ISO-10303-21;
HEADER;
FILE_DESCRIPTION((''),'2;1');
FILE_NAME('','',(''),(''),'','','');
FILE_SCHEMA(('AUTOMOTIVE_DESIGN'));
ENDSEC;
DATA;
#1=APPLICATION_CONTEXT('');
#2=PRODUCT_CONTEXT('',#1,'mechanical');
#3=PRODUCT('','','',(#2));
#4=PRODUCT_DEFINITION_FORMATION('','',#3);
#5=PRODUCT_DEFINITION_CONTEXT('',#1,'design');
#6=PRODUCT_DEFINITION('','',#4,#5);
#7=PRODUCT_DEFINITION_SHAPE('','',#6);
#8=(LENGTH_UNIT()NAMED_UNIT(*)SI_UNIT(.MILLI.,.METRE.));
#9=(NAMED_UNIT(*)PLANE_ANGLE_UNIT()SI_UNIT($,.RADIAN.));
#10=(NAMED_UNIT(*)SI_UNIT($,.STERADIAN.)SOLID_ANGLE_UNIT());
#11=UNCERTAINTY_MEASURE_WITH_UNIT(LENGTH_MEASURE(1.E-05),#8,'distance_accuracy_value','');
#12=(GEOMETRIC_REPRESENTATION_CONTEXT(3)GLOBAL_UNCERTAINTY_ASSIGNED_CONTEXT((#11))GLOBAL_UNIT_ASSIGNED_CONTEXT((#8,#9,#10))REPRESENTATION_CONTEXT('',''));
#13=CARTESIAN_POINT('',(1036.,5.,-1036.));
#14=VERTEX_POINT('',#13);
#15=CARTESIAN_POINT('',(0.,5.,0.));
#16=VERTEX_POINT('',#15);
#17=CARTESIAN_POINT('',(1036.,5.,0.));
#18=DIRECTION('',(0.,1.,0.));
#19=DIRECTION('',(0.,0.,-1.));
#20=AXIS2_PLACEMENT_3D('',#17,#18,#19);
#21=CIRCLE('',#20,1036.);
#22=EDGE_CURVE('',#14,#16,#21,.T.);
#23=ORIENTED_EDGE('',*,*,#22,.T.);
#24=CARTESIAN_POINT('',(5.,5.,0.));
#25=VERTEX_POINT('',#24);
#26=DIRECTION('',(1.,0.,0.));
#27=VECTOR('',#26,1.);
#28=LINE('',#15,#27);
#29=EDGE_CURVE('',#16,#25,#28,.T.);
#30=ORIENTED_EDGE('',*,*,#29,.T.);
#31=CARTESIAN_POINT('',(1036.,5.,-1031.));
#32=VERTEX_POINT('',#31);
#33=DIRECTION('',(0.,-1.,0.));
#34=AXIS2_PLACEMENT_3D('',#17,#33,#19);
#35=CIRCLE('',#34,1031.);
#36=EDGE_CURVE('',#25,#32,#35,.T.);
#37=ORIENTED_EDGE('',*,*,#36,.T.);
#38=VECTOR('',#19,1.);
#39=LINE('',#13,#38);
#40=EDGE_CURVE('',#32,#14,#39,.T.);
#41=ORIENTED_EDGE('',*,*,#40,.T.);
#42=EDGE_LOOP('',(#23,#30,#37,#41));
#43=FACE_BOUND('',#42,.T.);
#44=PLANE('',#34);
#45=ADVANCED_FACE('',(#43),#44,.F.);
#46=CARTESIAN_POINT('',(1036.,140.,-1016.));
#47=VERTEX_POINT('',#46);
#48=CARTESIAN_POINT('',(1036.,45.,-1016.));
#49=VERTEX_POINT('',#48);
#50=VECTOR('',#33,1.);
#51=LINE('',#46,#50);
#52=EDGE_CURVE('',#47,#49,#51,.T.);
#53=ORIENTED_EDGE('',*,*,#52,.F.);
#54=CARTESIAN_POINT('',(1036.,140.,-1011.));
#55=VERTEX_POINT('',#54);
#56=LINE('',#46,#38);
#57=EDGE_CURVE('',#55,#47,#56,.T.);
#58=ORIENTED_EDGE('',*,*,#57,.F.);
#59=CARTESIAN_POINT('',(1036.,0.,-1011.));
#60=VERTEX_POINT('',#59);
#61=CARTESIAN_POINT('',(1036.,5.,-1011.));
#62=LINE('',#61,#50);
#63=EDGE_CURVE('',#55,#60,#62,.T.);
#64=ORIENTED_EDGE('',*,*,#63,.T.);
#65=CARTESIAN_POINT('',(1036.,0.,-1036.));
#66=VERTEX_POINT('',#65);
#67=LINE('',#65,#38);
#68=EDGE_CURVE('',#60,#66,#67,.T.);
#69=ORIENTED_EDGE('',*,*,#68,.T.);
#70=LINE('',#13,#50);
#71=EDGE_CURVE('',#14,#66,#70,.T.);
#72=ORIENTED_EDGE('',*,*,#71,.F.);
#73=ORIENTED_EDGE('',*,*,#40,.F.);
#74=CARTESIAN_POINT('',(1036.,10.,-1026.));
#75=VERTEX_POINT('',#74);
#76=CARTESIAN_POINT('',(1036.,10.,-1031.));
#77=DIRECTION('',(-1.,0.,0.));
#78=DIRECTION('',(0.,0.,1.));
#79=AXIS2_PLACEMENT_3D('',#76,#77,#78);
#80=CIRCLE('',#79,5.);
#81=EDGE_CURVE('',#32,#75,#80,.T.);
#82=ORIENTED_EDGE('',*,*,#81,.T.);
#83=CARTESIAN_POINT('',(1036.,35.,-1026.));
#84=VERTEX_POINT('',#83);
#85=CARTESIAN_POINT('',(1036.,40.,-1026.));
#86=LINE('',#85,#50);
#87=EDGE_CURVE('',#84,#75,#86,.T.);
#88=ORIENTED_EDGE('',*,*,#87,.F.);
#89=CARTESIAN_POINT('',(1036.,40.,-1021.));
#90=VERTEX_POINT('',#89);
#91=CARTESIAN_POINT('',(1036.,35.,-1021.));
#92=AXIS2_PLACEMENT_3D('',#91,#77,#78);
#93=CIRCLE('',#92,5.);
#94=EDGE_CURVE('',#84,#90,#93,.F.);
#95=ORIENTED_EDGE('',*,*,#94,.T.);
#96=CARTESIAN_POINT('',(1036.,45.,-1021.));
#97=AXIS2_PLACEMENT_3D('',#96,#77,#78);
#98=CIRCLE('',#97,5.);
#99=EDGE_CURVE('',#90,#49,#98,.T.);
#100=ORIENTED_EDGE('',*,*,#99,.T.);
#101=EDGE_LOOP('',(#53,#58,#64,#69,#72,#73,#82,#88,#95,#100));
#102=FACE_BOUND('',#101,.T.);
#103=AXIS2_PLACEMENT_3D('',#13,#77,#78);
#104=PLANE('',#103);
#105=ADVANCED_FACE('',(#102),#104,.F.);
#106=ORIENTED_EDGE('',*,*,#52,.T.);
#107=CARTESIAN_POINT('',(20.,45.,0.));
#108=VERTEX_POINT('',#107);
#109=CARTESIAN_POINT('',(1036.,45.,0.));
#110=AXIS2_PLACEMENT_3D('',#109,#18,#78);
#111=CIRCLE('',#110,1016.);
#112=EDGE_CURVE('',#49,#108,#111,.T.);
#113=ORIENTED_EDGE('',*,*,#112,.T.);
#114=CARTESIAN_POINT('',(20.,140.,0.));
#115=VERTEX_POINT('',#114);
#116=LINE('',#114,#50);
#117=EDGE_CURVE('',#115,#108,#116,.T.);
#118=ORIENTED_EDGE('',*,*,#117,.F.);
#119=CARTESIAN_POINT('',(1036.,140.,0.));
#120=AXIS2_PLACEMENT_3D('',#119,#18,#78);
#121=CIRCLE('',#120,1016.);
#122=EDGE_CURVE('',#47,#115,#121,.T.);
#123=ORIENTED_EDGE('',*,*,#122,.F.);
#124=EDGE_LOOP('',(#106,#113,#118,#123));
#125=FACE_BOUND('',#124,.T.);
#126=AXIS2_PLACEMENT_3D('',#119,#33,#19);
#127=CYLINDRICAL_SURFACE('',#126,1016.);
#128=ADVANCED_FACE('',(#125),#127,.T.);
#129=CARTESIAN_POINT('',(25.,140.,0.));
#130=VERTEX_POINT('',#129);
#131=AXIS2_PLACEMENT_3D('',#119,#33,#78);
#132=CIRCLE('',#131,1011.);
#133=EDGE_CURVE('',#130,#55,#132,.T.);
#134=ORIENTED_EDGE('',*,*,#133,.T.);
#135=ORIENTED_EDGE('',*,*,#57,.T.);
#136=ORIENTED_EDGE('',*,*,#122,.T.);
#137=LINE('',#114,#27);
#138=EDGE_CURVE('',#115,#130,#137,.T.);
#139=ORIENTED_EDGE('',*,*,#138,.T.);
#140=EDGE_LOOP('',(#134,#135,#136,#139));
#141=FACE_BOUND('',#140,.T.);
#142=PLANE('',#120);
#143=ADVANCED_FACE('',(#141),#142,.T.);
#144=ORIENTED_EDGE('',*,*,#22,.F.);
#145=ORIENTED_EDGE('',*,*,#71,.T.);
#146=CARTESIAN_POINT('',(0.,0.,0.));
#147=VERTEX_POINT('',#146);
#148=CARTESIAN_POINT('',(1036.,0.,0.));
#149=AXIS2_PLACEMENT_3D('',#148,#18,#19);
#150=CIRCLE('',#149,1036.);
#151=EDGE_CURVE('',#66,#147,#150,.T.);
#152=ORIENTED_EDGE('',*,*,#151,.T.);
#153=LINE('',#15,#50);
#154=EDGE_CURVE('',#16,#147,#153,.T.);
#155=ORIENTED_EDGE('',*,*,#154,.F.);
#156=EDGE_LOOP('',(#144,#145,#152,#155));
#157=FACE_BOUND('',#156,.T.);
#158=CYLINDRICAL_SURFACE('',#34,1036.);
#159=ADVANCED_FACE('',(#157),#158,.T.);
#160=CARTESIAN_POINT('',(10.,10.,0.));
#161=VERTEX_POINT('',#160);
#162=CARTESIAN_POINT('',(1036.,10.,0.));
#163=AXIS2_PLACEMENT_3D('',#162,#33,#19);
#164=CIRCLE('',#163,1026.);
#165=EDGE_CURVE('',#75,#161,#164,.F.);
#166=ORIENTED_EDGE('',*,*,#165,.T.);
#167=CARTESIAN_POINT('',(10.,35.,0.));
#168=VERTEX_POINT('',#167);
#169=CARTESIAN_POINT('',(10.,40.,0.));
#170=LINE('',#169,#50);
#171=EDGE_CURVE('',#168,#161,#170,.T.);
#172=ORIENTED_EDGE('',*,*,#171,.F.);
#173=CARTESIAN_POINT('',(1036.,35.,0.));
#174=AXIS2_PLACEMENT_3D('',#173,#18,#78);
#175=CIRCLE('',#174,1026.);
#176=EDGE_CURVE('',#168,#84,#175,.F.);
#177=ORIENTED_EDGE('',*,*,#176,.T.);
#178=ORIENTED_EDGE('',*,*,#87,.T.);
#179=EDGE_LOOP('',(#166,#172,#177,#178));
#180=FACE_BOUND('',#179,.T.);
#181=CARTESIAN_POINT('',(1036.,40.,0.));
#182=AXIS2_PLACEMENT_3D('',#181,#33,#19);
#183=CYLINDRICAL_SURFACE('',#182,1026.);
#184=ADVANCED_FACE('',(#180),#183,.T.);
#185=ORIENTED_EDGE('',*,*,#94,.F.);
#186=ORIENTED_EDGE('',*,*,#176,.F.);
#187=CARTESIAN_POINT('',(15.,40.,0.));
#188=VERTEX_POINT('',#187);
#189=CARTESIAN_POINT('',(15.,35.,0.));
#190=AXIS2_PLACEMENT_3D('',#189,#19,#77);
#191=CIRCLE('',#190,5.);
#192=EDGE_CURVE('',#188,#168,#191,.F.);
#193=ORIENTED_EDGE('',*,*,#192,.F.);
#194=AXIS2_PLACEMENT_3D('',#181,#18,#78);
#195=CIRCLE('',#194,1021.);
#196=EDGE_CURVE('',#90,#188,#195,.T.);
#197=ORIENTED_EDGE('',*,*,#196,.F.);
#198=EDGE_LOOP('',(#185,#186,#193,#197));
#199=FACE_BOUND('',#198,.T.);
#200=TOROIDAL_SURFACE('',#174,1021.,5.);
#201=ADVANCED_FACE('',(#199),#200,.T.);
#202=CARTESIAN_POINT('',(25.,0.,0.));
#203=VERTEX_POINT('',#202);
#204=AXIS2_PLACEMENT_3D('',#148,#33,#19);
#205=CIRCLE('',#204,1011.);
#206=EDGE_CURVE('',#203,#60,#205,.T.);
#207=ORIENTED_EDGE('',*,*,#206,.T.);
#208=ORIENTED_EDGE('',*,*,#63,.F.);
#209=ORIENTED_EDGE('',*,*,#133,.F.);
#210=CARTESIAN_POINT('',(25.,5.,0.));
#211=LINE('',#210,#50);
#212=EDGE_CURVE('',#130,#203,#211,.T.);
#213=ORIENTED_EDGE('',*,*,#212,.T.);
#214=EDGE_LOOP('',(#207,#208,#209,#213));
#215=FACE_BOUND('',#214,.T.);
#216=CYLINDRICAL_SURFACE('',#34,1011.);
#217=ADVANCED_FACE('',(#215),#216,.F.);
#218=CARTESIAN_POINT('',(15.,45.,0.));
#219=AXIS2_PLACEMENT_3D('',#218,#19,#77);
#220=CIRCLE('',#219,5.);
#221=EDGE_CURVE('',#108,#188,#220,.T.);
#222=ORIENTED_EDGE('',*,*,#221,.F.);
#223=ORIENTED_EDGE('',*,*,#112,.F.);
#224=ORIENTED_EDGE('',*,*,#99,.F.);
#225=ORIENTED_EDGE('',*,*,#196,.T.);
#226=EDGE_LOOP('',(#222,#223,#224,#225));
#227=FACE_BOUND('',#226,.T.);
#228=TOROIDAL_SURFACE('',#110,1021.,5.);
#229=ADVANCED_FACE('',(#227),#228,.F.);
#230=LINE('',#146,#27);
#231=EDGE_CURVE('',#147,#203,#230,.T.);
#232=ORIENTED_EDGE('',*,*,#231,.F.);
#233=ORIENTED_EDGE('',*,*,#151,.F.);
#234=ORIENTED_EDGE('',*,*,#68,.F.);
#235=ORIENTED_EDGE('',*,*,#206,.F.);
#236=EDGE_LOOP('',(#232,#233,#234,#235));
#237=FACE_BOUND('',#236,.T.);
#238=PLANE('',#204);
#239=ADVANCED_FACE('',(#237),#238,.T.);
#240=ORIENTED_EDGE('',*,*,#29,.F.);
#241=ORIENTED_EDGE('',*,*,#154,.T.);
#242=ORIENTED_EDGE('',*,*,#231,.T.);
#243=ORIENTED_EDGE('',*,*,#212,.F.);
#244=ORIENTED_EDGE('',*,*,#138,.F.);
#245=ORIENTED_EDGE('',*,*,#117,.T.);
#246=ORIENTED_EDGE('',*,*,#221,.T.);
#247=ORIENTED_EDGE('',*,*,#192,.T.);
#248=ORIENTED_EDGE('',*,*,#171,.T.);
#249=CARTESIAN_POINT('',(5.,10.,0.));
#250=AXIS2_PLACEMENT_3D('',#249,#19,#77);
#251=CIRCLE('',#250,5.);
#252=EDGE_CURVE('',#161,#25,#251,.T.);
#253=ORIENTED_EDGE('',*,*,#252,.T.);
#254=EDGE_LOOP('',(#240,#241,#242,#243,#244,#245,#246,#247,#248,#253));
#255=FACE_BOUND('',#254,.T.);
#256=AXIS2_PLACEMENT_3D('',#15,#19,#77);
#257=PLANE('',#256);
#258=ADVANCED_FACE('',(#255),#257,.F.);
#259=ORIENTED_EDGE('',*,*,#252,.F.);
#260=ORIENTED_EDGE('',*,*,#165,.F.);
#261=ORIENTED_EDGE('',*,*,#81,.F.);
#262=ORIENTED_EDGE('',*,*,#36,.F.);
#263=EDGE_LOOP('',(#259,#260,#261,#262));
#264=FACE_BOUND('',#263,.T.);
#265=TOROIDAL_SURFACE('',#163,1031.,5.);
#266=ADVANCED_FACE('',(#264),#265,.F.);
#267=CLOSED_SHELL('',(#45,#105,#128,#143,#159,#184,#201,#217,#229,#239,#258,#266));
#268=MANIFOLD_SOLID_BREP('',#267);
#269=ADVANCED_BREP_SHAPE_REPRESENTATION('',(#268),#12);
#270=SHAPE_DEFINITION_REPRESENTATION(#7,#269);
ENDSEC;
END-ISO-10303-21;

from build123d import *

# Parameters (mm, degrees)
BOTTOM_LEVEL_DEPTH = 5
MID_LEVEL_DEPTH    = 35
GUARD_RAIL_DEPTH   = 100
ROUNDING_R         = 5


with BuildPart() as part:
    # Sketch1 → Bottom level (new body)
    with BuildSketch(Plane(origin=(0, 0, 0), x_dir=(1, 0, 0), z_dir=(0, 1, 0))):
        with BuildLine():
            Line((0, 0), (25, 0))
            ThreePointArc((25, 0), (321.11504422, 714.88495578), (1036, 1011))
            Line((1036, 1011), (1036, 1036))
            ThreePointArc((1036, 1036), (303.437374691, 732.562625309), (0, 0))
        make_face()
    extrude(amount=BOTTOM_LEVEL_DEPTH)

    # Sketch2 → Mid level (add)
    with BuildSketch(Plane(origin=(0, 5, 0), x_dir=(1, 0, 0), z_dir=(0, 1, 0))):
        with BuildLine():
            Line((1036, 1011), (1036, 1026))
            ThreePointArc((1036, 1026), (310.508442503, 725.491557497), (10, 0))
            Line((10, 0), (25, 0))
            ThreePointArc((25, 0), (321.11504422, 714.88495578), (1036, 1011))
        make_face()
    extrude(amount=MID_LEVEL_DEPTH)

    # Sketch3 → Guard rail (add)
    with BuildSketch(Plane(origin=(0, 40, 0), x_dir=(1, 0, 0), z_dir=(0, 1, 0))):
        with BuildLine():
            Line((1036, 1016), (1036, 1011))
            ThreePointArc((1036, 1011), (321.11504422, 714.88495578), (25, 0))
            Line((25, 0), (20, 0))
            ThreePointArc((20, 0), (317.579510314, 718.420489686), (1036, 1016))
        make_face()
    extrude(amount=GUARD_RAIL_DEPTH)

    # Rounding
    rounding_edges = [part.edges().sort_by_distance(p)[0] for p in [
        (317.579510314, 40, -718.420489686),
        (310.508442503, 40, -725.491557497),
        (310.508442503, 5, -725.491557497),
    ]]
    fillet(rounding_edges, radius=ROUNDING_R - 0.0001)  # a hair under: the kernel refuses the full size


solid = part.part
